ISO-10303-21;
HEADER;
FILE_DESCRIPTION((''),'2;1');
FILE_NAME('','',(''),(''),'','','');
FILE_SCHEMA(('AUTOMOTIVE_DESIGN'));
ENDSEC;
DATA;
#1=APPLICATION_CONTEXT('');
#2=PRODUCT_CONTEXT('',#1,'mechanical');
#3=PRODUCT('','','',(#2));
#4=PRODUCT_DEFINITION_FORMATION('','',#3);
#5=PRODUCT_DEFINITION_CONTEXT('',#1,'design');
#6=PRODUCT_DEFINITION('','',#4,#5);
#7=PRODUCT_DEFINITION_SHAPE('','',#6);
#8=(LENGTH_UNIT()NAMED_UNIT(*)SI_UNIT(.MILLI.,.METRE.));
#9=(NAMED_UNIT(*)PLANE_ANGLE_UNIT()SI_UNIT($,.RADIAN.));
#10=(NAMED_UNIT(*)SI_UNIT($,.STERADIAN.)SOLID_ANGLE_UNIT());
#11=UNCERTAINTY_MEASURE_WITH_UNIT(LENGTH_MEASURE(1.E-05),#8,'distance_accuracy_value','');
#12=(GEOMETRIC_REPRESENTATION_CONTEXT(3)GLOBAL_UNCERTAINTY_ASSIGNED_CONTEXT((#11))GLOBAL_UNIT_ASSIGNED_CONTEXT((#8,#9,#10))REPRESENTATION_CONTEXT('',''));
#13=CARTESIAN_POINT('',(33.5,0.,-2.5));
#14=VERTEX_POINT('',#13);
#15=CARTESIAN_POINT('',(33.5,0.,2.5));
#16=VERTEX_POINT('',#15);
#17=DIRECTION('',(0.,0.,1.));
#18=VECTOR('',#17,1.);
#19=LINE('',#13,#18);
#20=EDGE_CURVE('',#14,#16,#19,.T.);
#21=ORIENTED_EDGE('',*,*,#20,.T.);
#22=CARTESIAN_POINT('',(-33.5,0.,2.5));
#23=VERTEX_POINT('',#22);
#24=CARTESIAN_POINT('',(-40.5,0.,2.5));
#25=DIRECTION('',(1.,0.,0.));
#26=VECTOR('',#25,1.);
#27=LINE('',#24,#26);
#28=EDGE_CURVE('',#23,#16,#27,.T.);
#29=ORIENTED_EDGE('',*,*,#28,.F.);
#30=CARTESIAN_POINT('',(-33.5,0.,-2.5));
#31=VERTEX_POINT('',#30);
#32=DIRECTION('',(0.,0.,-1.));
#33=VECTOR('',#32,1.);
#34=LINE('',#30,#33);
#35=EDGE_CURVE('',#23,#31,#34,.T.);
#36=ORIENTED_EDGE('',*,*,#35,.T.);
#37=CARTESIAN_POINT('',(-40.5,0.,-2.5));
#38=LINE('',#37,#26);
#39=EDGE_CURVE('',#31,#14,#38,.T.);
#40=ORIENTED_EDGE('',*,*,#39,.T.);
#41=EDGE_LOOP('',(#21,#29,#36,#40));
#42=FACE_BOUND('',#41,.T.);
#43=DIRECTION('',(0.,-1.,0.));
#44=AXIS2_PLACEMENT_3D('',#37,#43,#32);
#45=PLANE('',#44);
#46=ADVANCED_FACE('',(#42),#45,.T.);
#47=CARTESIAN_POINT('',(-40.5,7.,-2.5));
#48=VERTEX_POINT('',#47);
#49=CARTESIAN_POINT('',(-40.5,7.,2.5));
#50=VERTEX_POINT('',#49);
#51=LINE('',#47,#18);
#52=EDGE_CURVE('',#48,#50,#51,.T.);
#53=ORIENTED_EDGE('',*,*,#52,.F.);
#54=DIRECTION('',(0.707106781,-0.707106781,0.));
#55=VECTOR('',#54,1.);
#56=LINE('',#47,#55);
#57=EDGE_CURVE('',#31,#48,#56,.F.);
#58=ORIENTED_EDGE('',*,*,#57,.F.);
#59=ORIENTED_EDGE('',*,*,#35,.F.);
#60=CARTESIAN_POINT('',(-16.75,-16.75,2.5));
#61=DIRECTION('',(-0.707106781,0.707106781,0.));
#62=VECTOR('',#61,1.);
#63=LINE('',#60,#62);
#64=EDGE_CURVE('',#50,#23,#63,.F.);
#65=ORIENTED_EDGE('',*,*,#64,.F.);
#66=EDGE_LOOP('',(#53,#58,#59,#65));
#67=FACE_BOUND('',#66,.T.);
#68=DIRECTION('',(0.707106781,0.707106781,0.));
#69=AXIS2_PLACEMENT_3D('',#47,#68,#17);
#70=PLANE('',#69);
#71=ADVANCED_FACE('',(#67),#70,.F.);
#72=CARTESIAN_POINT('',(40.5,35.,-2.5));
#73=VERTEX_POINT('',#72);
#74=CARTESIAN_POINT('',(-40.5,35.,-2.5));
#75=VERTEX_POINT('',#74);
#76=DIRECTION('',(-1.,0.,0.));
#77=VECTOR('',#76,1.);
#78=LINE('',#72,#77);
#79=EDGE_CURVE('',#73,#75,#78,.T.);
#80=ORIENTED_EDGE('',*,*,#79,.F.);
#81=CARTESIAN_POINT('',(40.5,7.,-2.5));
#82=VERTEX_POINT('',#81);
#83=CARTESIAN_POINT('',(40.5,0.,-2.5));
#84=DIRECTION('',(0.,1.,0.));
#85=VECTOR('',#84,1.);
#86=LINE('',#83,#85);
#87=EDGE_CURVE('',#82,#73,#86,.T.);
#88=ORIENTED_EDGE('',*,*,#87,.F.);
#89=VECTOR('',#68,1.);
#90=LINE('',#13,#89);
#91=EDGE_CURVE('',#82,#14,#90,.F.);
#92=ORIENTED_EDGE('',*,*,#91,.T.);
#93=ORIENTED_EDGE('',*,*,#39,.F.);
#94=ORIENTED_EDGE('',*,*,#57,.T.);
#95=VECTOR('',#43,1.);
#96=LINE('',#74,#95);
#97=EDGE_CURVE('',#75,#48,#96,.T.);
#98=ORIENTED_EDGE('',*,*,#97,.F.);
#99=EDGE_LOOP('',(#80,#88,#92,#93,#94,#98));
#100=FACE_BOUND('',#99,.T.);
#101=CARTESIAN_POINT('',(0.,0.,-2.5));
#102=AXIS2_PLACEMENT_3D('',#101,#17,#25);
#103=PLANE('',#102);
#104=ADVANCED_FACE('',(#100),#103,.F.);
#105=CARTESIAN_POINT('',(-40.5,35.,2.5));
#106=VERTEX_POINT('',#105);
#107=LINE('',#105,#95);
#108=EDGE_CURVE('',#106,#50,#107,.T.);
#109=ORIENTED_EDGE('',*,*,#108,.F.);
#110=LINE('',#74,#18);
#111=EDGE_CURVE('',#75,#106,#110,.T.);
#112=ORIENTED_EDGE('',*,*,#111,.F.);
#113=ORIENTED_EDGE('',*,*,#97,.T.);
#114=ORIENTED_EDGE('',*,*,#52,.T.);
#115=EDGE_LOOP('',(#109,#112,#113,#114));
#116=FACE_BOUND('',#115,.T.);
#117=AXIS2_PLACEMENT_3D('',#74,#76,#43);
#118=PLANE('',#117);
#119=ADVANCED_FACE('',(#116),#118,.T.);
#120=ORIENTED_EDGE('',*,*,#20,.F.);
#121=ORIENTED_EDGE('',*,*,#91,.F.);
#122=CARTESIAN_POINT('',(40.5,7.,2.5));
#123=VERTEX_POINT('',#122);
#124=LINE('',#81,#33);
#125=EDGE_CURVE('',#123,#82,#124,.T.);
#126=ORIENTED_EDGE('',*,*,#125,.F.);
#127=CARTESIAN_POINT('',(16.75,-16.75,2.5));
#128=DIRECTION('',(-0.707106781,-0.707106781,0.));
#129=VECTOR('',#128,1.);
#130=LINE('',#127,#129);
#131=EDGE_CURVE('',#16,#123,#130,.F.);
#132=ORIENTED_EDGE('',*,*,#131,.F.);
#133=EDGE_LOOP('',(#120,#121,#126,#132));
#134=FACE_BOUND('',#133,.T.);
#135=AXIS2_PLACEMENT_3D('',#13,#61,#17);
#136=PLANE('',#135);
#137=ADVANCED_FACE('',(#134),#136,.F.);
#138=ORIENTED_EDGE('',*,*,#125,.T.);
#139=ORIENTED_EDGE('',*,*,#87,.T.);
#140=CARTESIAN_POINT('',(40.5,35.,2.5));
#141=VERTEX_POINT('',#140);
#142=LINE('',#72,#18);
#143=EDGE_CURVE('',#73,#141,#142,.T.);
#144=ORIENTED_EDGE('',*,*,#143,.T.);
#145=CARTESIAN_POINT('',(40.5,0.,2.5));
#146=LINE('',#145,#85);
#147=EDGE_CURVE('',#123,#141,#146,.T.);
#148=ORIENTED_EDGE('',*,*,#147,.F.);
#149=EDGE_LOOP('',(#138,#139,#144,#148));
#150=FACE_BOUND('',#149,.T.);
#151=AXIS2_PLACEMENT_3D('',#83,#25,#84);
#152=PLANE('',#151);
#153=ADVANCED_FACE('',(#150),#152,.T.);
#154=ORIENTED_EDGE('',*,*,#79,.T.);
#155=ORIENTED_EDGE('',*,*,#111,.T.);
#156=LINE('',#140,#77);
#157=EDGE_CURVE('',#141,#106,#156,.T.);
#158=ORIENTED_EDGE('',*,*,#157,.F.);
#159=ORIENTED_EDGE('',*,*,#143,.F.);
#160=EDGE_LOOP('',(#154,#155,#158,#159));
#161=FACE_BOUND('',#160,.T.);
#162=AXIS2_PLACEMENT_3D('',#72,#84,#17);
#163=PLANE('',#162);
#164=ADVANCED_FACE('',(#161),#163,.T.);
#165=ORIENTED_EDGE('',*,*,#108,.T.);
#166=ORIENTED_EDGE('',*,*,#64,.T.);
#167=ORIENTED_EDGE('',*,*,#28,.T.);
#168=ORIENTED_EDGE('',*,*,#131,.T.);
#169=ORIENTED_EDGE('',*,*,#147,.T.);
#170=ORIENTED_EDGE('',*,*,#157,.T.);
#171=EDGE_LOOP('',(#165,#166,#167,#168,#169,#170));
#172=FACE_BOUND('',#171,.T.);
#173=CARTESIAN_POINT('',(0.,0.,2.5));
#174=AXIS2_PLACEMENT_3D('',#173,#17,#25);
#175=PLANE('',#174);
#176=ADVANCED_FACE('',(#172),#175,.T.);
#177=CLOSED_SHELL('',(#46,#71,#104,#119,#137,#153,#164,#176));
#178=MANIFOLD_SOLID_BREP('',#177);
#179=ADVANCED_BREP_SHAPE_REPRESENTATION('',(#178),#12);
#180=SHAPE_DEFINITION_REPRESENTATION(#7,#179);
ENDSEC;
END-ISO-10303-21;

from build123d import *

# Parameters (mm, degrees)
SM_START                   = -2.5
SM_BASE_FLANGE_1_OUTLINE_W = 81
SM_BASE_FLANGE_1_OUTLINE_H = 35
SM_BASE_FLANGE_1_DEPTH     = 5
CHAMFER_1_SIZE             = 7


# Read off the part's stored shape, not the designer's step: Базовая кромка1
with BuildPart() as part:
    # Базовая кромка1 outline → Базовая кромка1 (new body)
    with BuildSketch(Plane.XY.offset(SM_START)):
        with Locations((0, 17.5)):
            Rectangle(SM_BASE_FLANGE_1_OUTLINE_W, SM_BASE_FLANGE_1_OUTLINE_H)
    extrude(amount=SM_BASE_FLANGE_1_DEPTH)

    # Фаска1
    chamfer_1_edges = [part.edges().sort_by_distance(p)[0] for p in [
        (40.5, 0, 0),
        (-40.5, 0, 0),
    ]]
    chamfer(chamfer_1_edges, length=CHAMFER_1_SIZE)


solid = part.part
